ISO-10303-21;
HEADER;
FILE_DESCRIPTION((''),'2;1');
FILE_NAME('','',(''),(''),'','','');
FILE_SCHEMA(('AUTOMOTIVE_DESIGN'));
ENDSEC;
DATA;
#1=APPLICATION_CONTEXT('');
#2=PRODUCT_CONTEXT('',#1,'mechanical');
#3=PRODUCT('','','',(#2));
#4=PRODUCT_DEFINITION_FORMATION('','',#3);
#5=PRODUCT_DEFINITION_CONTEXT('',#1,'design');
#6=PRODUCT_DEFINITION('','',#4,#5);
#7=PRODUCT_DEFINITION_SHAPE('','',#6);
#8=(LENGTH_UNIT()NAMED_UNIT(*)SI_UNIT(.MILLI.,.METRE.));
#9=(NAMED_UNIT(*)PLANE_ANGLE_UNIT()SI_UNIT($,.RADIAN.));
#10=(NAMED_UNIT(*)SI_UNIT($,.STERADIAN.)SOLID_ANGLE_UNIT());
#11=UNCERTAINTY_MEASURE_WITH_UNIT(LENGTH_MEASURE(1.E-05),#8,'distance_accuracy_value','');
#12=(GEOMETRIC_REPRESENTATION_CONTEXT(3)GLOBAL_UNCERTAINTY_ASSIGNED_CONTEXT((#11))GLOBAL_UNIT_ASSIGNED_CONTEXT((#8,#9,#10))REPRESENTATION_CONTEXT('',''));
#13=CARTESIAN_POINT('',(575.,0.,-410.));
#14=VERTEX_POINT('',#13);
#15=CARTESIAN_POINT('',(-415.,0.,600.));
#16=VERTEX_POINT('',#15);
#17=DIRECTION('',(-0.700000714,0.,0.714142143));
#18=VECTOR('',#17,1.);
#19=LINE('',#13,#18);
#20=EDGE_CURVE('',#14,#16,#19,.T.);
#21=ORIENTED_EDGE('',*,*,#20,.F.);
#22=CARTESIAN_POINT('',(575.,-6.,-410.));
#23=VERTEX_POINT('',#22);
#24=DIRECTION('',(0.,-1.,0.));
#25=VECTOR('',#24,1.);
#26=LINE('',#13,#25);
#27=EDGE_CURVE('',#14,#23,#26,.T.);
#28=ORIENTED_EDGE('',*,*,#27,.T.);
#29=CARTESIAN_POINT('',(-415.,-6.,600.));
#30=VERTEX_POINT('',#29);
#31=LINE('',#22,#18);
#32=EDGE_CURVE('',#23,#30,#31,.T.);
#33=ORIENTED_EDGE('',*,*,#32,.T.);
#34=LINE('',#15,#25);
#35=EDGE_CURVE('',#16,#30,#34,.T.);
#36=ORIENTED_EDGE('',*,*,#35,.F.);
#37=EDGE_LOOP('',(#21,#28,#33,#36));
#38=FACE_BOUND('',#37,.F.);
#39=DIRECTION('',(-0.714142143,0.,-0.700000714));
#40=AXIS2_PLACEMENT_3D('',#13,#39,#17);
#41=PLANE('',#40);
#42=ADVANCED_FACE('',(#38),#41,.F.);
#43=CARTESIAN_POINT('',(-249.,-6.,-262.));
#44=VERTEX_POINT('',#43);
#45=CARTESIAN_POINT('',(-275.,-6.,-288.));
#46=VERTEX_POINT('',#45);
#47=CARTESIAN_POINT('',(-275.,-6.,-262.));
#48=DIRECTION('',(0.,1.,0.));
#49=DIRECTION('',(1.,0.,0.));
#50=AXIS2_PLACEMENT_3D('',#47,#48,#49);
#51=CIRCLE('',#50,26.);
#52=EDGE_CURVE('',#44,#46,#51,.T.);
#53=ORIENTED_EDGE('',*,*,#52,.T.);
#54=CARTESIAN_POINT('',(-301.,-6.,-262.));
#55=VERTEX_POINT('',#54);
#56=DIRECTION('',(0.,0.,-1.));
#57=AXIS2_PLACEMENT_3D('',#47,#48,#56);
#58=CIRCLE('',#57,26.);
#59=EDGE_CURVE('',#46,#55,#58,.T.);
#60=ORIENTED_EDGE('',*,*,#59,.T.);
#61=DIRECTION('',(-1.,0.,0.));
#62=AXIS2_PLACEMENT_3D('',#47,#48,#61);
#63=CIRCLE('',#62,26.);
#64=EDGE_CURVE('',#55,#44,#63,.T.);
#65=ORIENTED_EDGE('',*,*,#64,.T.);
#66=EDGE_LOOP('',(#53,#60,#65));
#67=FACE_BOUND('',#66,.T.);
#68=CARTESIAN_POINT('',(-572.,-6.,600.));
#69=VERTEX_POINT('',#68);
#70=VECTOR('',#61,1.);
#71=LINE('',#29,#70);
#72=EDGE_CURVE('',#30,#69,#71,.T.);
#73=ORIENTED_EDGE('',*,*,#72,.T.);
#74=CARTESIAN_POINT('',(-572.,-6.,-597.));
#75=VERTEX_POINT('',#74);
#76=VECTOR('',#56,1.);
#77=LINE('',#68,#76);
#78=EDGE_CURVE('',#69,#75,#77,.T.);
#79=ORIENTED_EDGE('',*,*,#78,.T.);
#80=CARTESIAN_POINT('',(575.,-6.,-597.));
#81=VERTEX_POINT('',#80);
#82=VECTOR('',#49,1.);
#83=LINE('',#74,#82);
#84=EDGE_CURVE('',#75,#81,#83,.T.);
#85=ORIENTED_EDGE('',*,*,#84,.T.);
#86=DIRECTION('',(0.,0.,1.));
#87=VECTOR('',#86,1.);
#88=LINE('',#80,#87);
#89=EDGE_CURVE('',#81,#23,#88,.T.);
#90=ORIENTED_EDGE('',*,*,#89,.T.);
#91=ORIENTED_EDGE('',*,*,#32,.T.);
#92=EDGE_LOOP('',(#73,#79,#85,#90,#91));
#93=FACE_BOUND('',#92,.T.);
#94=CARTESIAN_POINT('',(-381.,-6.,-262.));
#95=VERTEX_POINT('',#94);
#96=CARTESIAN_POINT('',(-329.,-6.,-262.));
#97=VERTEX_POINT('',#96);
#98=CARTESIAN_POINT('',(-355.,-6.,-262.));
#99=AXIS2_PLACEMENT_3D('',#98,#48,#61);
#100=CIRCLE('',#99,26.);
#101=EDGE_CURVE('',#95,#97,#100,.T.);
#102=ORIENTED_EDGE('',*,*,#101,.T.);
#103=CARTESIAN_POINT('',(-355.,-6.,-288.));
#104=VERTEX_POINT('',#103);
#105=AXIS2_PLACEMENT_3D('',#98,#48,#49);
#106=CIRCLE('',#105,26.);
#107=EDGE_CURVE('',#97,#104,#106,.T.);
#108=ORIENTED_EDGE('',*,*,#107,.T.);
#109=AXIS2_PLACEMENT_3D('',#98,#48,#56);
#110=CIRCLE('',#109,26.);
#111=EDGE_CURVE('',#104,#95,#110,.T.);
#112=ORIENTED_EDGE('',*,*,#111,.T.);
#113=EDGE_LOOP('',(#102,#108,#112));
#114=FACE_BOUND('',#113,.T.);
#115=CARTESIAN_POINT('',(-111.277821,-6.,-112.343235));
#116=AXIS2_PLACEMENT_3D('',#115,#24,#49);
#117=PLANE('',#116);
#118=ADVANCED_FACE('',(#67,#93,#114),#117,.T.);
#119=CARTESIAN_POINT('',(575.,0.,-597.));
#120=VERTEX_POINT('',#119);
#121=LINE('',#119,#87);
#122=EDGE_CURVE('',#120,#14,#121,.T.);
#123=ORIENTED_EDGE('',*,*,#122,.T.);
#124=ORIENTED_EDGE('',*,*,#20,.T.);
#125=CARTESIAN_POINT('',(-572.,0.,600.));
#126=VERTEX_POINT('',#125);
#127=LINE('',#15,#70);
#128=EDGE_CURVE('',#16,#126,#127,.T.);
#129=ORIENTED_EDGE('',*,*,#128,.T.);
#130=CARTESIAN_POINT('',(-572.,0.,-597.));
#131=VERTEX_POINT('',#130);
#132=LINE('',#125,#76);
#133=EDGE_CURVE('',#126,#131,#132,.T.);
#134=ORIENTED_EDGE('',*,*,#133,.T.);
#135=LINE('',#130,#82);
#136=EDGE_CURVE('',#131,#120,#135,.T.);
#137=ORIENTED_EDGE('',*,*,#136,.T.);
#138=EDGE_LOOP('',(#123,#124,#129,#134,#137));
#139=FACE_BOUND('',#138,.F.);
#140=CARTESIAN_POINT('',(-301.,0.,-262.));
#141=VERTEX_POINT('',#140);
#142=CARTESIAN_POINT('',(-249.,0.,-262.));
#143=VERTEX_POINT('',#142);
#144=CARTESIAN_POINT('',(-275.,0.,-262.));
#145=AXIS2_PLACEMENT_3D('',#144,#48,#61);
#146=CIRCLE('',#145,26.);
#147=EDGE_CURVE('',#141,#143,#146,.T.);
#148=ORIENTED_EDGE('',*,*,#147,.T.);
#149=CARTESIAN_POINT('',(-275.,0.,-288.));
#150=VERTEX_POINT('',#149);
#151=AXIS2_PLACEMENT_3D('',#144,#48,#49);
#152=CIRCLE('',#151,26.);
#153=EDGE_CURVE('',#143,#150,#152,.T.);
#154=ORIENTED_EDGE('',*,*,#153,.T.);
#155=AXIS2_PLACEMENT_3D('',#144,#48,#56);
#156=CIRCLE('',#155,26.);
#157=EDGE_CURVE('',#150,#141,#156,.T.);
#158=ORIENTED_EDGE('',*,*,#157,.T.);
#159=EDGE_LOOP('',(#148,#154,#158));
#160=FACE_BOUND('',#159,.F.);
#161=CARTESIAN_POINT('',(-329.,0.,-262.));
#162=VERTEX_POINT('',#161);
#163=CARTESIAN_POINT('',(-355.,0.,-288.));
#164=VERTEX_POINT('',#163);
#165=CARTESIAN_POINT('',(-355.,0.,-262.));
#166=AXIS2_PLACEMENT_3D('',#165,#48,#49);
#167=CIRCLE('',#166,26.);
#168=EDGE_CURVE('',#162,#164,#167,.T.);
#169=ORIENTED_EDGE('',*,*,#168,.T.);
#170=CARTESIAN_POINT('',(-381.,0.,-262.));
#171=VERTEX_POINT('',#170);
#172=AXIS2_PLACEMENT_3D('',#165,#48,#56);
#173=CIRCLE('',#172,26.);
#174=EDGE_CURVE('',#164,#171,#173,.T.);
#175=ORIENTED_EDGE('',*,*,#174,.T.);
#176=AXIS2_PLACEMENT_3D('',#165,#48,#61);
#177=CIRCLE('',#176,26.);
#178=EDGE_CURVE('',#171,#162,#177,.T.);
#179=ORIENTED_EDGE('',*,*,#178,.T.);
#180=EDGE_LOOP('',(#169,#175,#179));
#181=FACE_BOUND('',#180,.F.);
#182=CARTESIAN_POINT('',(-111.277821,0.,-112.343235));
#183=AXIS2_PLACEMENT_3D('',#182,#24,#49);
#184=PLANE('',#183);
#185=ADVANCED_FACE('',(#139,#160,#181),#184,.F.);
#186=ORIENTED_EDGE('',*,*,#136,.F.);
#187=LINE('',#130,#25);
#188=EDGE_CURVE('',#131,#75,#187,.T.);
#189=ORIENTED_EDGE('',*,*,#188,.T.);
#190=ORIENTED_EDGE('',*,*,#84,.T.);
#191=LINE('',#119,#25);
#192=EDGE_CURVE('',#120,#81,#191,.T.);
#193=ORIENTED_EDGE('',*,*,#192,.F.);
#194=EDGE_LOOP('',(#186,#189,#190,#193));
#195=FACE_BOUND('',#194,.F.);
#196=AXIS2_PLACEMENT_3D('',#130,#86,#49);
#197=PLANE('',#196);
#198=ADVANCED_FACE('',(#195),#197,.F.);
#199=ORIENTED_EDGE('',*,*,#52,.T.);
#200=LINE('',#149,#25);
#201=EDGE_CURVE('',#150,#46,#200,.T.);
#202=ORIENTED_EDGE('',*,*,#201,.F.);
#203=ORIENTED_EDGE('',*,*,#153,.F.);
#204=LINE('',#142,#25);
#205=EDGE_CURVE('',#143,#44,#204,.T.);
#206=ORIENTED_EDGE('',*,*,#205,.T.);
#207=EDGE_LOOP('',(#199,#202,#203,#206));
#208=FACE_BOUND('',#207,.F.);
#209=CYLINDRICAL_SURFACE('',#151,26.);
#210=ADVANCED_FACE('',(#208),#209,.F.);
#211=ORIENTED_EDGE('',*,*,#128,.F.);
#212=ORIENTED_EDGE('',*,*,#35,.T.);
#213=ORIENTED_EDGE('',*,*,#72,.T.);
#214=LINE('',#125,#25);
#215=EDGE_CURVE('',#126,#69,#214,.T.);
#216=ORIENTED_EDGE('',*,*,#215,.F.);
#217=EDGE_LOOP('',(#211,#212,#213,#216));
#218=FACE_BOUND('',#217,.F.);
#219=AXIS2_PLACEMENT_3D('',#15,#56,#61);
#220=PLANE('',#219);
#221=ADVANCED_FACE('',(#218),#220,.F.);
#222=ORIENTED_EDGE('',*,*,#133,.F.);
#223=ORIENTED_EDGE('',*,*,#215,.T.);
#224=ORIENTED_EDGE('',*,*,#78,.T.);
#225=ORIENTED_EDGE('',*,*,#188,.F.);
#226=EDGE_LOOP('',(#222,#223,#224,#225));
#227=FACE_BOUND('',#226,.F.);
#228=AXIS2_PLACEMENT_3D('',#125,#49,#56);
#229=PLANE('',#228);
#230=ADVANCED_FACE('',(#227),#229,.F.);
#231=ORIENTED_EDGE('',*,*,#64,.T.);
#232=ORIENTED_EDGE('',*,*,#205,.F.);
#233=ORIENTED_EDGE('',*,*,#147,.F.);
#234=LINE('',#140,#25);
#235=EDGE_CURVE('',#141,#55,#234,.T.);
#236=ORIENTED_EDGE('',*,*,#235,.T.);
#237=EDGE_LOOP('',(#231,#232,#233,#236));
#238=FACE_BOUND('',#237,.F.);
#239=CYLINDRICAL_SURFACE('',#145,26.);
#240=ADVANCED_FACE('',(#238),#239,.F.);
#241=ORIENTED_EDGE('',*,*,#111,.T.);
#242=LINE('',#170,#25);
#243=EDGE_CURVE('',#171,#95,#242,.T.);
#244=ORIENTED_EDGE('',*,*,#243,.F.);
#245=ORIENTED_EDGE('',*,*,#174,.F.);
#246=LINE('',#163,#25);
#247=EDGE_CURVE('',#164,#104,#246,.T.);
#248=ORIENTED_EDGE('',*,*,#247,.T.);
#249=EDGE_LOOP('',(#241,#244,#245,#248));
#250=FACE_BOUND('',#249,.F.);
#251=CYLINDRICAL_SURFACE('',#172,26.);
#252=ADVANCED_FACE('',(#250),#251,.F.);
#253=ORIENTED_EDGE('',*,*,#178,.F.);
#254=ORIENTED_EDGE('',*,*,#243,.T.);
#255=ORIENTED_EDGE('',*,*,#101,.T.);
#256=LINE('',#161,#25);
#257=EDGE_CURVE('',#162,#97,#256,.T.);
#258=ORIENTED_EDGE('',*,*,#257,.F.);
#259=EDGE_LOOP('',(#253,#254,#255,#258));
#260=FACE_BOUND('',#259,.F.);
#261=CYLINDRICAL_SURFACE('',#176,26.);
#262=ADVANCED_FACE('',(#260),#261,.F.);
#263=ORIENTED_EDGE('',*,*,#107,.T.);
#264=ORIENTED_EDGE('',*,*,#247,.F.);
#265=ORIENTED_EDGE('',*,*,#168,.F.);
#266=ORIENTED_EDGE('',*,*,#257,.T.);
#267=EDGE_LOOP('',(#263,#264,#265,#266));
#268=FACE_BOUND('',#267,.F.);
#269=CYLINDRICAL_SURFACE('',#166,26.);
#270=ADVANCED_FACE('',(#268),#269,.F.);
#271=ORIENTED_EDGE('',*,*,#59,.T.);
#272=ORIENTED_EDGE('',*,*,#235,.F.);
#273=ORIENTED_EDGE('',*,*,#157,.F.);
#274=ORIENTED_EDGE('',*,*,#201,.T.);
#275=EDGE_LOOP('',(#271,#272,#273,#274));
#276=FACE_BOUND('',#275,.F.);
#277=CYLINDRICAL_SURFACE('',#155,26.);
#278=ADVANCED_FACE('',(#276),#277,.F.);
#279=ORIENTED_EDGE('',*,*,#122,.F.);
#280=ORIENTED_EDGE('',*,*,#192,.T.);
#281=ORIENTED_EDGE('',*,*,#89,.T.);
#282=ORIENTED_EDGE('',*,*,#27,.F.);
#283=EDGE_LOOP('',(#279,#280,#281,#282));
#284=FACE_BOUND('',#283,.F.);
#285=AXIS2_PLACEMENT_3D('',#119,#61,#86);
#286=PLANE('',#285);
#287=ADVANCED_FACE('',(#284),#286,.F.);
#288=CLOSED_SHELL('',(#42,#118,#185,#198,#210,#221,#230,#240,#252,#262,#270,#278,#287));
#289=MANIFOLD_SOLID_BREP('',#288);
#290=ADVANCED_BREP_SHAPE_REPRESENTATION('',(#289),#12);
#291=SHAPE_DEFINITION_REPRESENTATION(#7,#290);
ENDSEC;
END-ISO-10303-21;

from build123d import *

# Parameters (mm, degrees)
F1_DEPTH = 6


with BuildPart() as f1:
    # F0 (on Front) → F1 (new body)
    with BuildSketch(Plane.XZ):
        with BuildLine():
            Line((-415, 600), (-572, 600))
            Line((-572, 600), (-572, -262))
            Line((-572, -262), (-381, -262))
            ThreePointArc((-381, -262), (-355, -236), (-329, -262))
            Line((-329, -262), (-301, -262))
            ThreePointArc((-301, -262), (-275, -236), (-249, -262))
            ThreePointArc((-249, -262), (-256.6152236891, -280.3847763109), (-275, -288))
            Line((-275, -288), (-275, -597))
            Line((-275, -597), (575, -597))
            Line((575, -597), (575, -410))
            Line((575, -410), (-415, 600))
        make_face()
        with BuildLine():
            Line((-381, -262), (-572, -262))
            Line((-572, -262), (-572, -597))
            Line((-572, -597), (-355, -597))
            Line((-355, -597), (-355, -288))
            ThreePointArc((-355, -288), (-373.3847763109, -280.3847763109), (-381, -262))
        make_face()
        with BuildLine():
            Line((-301, -262), (-329, -262))
            ThreePointArc((-329, -262), (-336.6152236891, -280.3847763109), (-355, -288))
            Line((-355, -288), (-355, -597))
            Line((-355, -597), (-275, -597))
            Line((-275, -597), (-275, -288))
            ThreePointArc((-275, -288), (-293.3847763109, -280.3847763109), (-301, -262))
        make_face()
    extrude(amount=F1_DEPTH)


solid = f1.part
